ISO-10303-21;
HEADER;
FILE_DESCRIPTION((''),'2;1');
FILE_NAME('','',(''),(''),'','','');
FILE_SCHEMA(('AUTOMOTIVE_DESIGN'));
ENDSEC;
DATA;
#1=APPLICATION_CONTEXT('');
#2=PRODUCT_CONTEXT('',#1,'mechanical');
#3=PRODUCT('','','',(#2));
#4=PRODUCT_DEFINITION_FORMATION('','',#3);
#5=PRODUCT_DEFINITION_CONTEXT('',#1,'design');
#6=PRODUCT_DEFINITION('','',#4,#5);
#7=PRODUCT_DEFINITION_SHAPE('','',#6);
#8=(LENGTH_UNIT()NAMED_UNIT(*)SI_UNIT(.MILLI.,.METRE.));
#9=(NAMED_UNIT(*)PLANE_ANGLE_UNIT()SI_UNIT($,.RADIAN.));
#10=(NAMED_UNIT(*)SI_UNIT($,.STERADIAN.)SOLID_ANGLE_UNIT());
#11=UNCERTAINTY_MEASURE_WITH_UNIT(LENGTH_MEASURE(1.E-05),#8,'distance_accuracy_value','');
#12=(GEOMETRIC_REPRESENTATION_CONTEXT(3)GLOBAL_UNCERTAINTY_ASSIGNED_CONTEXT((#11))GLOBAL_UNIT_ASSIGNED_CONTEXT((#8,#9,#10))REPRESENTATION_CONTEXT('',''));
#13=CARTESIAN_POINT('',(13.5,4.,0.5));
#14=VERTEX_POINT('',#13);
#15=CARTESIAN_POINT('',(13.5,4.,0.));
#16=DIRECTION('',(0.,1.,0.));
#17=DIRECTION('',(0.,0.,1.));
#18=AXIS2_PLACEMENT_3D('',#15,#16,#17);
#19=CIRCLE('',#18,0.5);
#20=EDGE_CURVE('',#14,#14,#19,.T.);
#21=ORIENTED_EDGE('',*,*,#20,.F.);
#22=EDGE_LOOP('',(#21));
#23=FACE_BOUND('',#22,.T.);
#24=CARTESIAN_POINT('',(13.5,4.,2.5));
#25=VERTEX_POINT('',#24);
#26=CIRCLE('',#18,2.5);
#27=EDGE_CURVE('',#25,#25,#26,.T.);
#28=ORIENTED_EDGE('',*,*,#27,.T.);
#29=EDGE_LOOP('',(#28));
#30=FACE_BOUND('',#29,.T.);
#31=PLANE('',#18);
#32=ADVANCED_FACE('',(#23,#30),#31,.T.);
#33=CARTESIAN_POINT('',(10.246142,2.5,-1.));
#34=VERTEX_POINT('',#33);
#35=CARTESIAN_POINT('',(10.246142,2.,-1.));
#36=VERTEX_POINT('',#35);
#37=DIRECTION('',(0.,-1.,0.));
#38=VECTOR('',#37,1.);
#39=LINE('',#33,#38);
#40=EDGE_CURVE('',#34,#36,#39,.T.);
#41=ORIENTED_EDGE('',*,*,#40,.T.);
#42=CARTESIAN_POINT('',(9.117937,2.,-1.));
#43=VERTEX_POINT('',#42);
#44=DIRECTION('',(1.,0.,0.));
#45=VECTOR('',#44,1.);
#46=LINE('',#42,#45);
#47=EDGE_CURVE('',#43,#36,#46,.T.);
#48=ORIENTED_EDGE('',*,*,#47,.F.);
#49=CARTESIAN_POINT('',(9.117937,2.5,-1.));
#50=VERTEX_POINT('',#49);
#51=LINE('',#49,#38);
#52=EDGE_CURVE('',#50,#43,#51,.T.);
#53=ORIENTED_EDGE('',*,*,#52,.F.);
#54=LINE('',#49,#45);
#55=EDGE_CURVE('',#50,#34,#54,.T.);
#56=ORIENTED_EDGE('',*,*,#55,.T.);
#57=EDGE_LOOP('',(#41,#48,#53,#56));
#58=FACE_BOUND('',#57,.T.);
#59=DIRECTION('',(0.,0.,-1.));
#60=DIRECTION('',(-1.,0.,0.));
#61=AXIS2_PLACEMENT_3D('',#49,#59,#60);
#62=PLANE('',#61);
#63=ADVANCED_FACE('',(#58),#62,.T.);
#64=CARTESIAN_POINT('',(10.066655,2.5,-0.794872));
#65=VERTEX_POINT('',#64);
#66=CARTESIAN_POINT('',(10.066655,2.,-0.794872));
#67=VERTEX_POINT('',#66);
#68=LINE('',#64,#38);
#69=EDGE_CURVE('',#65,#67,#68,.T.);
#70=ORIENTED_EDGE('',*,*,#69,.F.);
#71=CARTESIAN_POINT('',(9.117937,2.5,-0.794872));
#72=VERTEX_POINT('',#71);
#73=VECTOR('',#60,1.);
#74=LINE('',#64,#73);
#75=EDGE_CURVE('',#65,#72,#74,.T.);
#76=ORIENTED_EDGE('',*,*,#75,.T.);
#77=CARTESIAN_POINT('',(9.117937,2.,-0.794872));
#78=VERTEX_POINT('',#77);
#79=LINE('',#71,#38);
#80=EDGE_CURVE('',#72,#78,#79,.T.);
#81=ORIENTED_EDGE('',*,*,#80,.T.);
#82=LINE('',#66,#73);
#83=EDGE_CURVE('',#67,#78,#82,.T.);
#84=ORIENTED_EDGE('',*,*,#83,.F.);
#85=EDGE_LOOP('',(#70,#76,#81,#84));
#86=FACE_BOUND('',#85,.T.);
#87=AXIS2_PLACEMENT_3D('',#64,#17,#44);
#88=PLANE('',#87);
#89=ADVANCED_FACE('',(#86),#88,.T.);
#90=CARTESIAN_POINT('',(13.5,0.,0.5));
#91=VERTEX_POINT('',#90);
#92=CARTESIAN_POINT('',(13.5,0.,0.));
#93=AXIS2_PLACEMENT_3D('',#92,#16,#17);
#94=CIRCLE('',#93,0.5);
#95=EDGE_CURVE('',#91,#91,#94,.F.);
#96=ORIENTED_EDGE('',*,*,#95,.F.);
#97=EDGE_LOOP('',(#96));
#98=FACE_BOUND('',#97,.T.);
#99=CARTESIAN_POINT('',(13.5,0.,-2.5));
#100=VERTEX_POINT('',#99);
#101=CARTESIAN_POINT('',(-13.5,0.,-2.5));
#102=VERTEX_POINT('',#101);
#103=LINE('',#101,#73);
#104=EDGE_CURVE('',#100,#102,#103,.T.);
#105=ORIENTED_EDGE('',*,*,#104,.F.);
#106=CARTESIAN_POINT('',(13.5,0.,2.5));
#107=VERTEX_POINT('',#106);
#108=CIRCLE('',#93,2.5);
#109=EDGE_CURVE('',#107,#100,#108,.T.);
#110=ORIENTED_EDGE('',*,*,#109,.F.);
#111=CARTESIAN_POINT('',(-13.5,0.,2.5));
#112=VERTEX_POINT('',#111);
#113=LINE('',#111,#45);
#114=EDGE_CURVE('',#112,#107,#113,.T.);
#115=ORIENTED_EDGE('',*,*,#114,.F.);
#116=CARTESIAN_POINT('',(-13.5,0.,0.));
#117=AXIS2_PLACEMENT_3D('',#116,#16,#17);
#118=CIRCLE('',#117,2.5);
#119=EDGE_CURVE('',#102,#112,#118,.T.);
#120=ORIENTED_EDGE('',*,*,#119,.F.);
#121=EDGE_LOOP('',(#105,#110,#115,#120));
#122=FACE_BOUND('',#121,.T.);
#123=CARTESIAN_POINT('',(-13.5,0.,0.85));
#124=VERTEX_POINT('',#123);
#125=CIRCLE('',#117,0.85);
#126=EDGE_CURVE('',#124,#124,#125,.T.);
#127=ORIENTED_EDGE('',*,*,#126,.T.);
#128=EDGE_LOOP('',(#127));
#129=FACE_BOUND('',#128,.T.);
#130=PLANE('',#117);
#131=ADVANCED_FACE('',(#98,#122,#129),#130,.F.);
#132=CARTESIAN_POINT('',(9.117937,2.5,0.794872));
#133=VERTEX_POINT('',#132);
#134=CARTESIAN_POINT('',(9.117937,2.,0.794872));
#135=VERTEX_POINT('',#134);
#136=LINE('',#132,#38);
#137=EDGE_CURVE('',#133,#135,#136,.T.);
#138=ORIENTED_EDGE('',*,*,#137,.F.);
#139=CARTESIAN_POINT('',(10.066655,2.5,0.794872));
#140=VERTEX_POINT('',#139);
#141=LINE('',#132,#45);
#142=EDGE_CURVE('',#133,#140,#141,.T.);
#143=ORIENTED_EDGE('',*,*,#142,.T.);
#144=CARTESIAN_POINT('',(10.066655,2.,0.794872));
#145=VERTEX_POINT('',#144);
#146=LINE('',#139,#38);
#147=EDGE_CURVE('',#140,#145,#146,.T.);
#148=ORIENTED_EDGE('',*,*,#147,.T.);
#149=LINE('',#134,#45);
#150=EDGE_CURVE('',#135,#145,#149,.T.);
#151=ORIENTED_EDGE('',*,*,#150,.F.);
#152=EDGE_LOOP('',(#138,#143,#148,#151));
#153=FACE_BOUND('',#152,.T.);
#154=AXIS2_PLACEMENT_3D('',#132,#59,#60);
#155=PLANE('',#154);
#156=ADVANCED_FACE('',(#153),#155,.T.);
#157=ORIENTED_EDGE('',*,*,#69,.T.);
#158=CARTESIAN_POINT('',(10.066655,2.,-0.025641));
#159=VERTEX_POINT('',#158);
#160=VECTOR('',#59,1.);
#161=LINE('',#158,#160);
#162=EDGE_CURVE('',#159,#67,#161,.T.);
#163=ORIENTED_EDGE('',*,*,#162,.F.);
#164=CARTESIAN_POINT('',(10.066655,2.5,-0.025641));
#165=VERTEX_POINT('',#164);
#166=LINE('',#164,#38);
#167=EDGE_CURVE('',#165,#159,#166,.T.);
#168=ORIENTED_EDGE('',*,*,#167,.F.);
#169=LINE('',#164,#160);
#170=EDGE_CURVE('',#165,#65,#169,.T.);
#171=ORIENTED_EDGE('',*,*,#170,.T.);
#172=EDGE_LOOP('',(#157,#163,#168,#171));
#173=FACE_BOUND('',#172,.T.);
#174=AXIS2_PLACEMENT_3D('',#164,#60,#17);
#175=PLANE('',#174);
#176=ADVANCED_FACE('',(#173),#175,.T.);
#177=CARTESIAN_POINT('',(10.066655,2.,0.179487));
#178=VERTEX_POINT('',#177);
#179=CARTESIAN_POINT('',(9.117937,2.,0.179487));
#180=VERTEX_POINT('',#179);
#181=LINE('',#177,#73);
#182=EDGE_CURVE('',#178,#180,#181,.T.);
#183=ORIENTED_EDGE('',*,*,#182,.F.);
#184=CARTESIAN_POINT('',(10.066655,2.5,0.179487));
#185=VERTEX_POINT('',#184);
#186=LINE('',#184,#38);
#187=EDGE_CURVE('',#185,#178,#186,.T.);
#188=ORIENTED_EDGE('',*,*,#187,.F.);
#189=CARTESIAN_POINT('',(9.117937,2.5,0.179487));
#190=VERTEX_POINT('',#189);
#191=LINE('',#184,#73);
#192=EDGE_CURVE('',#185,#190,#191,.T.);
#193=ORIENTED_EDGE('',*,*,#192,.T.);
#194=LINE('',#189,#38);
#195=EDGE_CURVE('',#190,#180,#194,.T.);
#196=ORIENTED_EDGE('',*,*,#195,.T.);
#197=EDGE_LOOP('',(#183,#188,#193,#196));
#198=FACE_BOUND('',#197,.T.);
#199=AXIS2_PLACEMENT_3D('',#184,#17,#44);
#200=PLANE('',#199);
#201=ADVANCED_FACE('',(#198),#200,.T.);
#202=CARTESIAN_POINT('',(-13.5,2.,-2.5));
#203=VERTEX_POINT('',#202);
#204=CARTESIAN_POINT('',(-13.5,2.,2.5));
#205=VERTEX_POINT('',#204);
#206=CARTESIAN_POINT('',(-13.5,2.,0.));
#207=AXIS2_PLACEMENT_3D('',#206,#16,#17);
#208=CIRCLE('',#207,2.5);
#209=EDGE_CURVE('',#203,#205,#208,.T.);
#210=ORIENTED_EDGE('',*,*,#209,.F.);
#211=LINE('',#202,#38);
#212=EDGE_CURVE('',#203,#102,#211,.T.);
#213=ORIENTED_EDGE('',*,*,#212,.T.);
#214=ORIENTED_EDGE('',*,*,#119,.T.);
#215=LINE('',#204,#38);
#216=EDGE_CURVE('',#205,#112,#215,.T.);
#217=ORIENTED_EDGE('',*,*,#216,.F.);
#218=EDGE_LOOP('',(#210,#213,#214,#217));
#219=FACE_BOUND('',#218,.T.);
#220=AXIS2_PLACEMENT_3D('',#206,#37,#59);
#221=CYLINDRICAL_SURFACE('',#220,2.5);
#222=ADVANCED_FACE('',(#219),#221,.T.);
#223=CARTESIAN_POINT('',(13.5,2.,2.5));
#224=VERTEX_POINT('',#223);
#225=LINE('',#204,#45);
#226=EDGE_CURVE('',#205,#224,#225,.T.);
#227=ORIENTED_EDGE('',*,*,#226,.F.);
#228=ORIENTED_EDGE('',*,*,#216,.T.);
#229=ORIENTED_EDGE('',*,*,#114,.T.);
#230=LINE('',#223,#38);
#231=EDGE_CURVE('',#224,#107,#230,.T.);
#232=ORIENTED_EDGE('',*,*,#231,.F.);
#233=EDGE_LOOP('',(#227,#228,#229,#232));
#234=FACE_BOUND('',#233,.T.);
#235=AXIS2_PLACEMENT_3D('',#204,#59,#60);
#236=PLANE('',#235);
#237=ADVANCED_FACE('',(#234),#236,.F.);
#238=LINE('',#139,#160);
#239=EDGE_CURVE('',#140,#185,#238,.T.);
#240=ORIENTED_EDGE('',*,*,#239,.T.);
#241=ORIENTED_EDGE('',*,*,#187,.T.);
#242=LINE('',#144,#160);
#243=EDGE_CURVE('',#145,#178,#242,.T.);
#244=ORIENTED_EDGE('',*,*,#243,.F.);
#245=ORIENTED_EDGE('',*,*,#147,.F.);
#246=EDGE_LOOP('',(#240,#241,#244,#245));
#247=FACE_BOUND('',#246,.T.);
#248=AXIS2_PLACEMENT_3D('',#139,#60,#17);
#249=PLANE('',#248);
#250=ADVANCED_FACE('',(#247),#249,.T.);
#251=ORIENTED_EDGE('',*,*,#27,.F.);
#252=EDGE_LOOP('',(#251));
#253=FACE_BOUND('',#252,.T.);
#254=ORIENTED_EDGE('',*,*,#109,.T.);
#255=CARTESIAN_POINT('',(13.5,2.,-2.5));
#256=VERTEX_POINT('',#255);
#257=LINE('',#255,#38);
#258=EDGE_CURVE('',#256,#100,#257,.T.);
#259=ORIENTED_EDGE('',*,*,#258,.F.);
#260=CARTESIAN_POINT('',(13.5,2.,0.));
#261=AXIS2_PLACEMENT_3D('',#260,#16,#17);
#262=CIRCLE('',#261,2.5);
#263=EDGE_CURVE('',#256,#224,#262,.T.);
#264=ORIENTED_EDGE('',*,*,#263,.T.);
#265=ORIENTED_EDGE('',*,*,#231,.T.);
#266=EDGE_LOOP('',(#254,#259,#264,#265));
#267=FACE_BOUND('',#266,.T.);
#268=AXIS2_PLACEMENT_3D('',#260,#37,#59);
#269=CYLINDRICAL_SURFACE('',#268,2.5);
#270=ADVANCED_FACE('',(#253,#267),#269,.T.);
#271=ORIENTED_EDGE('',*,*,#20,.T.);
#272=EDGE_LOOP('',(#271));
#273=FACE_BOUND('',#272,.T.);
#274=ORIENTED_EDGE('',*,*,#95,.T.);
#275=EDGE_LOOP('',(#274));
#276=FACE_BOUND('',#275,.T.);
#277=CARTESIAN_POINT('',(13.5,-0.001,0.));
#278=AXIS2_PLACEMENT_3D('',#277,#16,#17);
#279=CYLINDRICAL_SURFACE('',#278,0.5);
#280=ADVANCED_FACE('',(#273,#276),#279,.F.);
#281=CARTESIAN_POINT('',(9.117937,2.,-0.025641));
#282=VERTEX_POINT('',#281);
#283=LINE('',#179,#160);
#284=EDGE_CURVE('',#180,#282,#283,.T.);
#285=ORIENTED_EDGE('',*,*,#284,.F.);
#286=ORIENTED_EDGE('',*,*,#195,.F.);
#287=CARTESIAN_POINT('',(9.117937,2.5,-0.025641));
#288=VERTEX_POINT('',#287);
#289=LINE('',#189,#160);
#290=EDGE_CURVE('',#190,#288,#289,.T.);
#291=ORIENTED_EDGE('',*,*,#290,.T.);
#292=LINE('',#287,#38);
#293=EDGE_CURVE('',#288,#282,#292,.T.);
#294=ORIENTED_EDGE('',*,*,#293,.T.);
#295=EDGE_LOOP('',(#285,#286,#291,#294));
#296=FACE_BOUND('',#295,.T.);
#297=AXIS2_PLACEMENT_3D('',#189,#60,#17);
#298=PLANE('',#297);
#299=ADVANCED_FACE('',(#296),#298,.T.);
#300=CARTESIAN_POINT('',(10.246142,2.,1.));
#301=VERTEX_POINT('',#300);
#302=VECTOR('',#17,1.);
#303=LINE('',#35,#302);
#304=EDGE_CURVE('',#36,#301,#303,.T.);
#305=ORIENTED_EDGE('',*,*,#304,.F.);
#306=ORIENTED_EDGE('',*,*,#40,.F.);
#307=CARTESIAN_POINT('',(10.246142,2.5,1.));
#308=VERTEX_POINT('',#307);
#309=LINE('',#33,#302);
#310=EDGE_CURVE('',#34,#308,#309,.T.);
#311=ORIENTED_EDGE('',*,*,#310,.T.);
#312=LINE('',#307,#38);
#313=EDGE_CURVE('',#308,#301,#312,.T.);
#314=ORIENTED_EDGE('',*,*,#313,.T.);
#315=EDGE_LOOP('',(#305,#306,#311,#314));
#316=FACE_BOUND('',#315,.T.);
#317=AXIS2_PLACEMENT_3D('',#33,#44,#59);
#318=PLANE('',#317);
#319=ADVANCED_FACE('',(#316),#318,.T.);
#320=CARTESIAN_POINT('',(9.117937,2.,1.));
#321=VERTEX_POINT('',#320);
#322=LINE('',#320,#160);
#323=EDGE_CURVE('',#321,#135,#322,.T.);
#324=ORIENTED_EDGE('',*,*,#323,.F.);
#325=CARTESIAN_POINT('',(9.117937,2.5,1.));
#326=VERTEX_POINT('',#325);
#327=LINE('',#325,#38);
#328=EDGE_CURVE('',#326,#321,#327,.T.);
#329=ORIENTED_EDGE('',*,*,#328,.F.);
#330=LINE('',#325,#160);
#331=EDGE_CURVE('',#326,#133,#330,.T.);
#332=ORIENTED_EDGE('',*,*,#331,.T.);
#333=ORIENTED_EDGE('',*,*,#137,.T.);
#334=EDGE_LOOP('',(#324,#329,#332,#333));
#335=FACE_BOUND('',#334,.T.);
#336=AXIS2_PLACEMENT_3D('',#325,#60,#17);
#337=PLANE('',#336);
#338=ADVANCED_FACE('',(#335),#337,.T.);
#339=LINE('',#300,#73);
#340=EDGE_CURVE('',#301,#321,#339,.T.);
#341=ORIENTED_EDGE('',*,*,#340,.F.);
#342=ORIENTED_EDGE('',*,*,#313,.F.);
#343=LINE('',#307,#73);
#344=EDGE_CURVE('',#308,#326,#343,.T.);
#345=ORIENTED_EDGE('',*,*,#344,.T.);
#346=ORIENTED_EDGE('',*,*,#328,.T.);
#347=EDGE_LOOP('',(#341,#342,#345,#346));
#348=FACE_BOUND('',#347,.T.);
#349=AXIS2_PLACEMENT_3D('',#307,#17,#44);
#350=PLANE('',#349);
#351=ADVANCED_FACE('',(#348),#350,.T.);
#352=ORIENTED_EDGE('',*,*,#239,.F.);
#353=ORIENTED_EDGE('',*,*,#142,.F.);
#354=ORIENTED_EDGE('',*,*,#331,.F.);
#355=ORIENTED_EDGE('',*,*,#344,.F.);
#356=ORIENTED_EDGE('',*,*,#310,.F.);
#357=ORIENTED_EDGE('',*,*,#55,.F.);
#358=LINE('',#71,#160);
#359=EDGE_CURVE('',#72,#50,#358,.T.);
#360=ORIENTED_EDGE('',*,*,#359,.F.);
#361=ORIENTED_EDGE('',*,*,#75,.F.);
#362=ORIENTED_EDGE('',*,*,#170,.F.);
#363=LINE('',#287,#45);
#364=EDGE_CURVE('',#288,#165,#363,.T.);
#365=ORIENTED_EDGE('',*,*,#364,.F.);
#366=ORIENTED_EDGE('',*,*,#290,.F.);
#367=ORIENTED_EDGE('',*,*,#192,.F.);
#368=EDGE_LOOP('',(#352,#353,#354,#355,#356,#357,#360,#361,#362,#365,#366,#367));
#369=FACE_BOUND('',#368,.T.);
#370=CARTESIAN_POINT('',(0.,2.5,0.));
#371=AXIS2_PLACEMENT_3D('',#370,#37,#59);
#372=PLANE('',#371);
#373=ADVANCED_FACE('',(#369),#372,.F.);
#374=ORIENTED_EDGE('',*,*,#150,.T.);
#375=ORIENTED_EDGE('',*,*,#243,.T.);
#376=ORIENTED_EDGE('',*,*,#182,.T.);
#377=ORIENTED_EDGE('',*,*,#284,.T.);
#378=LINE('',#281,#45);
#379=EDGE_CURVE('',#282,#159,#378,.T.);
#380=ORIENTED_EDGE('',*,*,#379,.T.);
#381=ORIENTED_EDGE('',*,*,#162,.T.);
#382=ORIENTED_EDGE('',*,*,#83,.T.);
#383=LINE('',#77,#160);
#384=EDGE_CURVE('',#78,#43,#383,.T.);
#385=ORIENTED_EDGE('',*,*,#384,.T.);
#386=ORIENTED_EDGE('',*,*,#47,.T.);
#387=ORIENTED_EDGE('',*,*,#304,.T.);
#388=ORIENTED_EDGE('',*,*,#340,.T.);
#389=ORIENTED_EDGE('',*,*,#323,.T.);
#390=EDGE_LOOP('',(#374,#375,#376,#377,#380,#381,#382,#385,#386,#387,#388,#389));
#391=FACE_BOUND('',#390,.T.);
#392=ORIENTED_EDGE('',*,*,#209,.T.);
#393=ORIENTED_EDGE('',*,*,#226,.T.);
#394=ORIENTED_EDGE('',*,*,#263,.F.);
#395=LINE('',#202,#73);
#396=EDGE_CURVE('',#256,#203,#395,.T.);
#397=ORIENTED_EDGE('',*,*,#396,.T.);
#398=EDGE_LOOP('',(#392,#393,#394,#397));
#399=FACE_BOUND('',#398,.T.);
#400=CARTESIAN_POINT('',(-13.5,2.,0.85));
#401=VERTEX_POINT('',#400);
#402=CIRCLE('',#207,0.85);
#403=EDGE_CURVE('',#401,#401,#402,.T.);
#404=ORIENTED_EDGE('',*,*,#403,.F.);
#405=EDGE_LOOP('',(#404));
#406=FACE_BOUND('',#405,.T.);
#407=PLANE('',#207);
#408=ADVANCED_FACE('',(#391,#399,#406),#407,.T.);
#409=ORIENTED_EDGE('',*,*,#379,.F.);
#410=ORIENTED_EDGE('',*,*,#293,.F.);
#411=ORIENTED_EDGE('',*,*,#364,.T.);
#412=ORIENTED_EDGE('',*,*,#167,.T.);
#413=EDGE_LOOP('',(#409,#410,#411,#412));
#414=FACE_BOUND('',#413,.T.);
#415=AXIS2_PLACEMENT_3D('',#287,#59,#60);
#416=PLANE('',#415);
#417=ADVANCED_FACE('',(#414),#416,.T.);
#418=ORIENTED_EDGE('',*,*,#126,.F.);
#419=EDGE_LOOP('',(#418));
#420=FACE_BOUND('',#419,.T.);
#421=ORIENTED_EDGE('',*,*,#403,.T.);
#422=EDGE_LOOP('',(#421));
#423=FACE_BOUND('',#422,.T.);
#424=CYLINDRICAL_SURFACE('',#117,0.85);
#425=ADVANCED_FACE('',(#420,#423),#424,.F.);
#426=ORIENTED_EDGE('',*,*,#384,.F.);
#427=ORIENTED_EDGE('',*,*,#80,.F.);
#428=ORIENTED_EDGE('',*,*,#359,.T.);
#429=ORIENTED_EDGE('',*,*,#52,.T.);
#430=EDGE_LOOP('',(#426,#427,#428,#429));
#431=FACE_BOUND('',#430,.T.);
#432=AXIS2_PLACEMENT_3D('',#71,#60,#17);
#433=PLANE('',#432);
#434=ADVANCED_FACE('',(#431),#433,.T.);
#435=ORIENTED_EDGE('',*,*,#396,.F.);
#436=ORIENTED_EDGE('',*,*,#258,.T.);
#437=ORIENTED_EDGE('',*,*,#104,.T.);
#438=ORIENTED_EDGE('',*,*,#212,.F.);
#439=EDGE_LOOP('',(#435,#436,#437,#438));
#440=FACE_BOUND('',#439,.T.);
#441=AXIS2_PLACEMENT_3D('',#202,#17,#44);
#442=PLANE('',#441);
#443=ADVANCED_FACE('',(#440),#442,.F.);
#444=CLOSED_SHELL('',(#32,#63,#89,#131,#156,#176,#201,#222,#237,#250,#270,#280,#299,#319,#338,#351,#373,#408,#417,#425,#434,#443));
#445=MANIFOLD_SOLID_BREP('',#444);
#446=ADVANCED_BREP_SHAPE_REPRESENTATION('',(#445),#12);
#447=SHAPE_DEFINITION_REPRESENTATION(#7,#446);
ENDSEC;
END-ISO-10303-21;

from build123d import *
from build123d.topology import SkipClean

# Parameters (mm, degrees)
RESSALTO_EXTRUS_O1_DEPTH = 2
ESBO_O2_R                = 0.85
CORTE_EXTRUS_O1_DEPTH    = 17.317168872
ESBO_O4_R                = 2.5
RESSALTO_EXTRUS_O2_DEPTH = 2
CORTE_EXTRUS_O2_REACH    = 18.681
ESBO_O3_R                = 0.5
RESSALTO_EXTRUS_O3_DEPTH = 0.5


with BuildPart() as part:
    # Esboço1 → Ressalto-extrusão1 (new body)
    with BuildSketch(Plane(origin=(0, 0, 0), x_dir=(1, 0, 0), z_dir=(0, 1, 0))):
        with BuildLine():
            Line((-13.5, 2.5), (13.5, 2.5))
            ThreePointArc((13.5, 2.5), (16, 0), (13.5, -2.5))
            Line((13.5, -2.5), (-13.5, -2.5))
            ThreePointArc((-13.5, -2.5), (-16, 0), (-13.5, 2.5))
        make_face()
    extrude(amount=RESSALTO_EXTRUS_O1_DEPTH)

    # Esboço2 → Corte-extrusão1 (cut, through all)
    with BuildSketch(Plane(origin=(0, 2, 0), x_dir=(1, 0, 0), z_dir=(0, 1, 0))):
        with Locations((-13.5, 0)):
            Circle(ESBO_O2_R)
    extrude(amount=-CORTE_EXTRUS_O1_DEPTH, mode=Mode.SUBTRACT)

    # Esboço4 → Ressalto-extrusão2 (add)
    with SkipClean():  # the faces are left unmerged after this step: merging them gives an invalid solid
        with BuildSketch(Plane(origin=(0, 2, 0), x_dir=(1, 0, 0), z_dir=(0, 1, 0))):
            with Locations((13.5, 0)):
                Circle(ESBO_O4_R)
        extrude(amount=RESSALTO_EXTRUS_O2_DEPTH)
    add(part.part.scale(1), mode=Mode.REPLACE)  # the faces are merged on a copy

    # Esboço3 → Corte-extrusão2 (cut, up to next)
    with BuildSketch(Plane(origin=(0, 4, 0), x_dir=(1, 0, 0), z_dir=(0, 1, 0)), mode=Mode.PRIVATE) as corte_extrus_o2_sk1:
        with Locations((13.5, 0)):
            Circle(ESBO_O3_R)
    corte_extrus_o2_tool1 = extrude(corte_extrus_o2_sk1.sketch, amount=-CORTE_EXTRUS_O2_REACH, mode=Mode.PRIVATE) & part.part
    add(corte_extrus_o2_tool1.solids().sort_by_distance((13.5, 4, 0))[0], mode=Mode.SUBTRACT)

    # Esboço5 → Ressalto-extrusão3 (add)
    with BuildSketch(Plane(origin=(0, 2, 0), x_dir=(1, 0, 0), z_dir=(0, 1, 0))):
        Polygon((10.246141944, -1), (9.117936815, -1), (9.117936815, -0.794871795), (10.066654764, -0.794871795), (10.066654764, -0.179487179), (9.117936815, -0.179487179), (9.117936815, 0.025641026), (10.066654764, 0.025641026), (10.066654764, 0.794871795), (9.117936815, 0.794871795), (9.117936815, 1), (10.246141944, 1), align=None)
    extrude(amount=RESSALTO_EXTRUS_O3_DEPTH)


solid = part.part
